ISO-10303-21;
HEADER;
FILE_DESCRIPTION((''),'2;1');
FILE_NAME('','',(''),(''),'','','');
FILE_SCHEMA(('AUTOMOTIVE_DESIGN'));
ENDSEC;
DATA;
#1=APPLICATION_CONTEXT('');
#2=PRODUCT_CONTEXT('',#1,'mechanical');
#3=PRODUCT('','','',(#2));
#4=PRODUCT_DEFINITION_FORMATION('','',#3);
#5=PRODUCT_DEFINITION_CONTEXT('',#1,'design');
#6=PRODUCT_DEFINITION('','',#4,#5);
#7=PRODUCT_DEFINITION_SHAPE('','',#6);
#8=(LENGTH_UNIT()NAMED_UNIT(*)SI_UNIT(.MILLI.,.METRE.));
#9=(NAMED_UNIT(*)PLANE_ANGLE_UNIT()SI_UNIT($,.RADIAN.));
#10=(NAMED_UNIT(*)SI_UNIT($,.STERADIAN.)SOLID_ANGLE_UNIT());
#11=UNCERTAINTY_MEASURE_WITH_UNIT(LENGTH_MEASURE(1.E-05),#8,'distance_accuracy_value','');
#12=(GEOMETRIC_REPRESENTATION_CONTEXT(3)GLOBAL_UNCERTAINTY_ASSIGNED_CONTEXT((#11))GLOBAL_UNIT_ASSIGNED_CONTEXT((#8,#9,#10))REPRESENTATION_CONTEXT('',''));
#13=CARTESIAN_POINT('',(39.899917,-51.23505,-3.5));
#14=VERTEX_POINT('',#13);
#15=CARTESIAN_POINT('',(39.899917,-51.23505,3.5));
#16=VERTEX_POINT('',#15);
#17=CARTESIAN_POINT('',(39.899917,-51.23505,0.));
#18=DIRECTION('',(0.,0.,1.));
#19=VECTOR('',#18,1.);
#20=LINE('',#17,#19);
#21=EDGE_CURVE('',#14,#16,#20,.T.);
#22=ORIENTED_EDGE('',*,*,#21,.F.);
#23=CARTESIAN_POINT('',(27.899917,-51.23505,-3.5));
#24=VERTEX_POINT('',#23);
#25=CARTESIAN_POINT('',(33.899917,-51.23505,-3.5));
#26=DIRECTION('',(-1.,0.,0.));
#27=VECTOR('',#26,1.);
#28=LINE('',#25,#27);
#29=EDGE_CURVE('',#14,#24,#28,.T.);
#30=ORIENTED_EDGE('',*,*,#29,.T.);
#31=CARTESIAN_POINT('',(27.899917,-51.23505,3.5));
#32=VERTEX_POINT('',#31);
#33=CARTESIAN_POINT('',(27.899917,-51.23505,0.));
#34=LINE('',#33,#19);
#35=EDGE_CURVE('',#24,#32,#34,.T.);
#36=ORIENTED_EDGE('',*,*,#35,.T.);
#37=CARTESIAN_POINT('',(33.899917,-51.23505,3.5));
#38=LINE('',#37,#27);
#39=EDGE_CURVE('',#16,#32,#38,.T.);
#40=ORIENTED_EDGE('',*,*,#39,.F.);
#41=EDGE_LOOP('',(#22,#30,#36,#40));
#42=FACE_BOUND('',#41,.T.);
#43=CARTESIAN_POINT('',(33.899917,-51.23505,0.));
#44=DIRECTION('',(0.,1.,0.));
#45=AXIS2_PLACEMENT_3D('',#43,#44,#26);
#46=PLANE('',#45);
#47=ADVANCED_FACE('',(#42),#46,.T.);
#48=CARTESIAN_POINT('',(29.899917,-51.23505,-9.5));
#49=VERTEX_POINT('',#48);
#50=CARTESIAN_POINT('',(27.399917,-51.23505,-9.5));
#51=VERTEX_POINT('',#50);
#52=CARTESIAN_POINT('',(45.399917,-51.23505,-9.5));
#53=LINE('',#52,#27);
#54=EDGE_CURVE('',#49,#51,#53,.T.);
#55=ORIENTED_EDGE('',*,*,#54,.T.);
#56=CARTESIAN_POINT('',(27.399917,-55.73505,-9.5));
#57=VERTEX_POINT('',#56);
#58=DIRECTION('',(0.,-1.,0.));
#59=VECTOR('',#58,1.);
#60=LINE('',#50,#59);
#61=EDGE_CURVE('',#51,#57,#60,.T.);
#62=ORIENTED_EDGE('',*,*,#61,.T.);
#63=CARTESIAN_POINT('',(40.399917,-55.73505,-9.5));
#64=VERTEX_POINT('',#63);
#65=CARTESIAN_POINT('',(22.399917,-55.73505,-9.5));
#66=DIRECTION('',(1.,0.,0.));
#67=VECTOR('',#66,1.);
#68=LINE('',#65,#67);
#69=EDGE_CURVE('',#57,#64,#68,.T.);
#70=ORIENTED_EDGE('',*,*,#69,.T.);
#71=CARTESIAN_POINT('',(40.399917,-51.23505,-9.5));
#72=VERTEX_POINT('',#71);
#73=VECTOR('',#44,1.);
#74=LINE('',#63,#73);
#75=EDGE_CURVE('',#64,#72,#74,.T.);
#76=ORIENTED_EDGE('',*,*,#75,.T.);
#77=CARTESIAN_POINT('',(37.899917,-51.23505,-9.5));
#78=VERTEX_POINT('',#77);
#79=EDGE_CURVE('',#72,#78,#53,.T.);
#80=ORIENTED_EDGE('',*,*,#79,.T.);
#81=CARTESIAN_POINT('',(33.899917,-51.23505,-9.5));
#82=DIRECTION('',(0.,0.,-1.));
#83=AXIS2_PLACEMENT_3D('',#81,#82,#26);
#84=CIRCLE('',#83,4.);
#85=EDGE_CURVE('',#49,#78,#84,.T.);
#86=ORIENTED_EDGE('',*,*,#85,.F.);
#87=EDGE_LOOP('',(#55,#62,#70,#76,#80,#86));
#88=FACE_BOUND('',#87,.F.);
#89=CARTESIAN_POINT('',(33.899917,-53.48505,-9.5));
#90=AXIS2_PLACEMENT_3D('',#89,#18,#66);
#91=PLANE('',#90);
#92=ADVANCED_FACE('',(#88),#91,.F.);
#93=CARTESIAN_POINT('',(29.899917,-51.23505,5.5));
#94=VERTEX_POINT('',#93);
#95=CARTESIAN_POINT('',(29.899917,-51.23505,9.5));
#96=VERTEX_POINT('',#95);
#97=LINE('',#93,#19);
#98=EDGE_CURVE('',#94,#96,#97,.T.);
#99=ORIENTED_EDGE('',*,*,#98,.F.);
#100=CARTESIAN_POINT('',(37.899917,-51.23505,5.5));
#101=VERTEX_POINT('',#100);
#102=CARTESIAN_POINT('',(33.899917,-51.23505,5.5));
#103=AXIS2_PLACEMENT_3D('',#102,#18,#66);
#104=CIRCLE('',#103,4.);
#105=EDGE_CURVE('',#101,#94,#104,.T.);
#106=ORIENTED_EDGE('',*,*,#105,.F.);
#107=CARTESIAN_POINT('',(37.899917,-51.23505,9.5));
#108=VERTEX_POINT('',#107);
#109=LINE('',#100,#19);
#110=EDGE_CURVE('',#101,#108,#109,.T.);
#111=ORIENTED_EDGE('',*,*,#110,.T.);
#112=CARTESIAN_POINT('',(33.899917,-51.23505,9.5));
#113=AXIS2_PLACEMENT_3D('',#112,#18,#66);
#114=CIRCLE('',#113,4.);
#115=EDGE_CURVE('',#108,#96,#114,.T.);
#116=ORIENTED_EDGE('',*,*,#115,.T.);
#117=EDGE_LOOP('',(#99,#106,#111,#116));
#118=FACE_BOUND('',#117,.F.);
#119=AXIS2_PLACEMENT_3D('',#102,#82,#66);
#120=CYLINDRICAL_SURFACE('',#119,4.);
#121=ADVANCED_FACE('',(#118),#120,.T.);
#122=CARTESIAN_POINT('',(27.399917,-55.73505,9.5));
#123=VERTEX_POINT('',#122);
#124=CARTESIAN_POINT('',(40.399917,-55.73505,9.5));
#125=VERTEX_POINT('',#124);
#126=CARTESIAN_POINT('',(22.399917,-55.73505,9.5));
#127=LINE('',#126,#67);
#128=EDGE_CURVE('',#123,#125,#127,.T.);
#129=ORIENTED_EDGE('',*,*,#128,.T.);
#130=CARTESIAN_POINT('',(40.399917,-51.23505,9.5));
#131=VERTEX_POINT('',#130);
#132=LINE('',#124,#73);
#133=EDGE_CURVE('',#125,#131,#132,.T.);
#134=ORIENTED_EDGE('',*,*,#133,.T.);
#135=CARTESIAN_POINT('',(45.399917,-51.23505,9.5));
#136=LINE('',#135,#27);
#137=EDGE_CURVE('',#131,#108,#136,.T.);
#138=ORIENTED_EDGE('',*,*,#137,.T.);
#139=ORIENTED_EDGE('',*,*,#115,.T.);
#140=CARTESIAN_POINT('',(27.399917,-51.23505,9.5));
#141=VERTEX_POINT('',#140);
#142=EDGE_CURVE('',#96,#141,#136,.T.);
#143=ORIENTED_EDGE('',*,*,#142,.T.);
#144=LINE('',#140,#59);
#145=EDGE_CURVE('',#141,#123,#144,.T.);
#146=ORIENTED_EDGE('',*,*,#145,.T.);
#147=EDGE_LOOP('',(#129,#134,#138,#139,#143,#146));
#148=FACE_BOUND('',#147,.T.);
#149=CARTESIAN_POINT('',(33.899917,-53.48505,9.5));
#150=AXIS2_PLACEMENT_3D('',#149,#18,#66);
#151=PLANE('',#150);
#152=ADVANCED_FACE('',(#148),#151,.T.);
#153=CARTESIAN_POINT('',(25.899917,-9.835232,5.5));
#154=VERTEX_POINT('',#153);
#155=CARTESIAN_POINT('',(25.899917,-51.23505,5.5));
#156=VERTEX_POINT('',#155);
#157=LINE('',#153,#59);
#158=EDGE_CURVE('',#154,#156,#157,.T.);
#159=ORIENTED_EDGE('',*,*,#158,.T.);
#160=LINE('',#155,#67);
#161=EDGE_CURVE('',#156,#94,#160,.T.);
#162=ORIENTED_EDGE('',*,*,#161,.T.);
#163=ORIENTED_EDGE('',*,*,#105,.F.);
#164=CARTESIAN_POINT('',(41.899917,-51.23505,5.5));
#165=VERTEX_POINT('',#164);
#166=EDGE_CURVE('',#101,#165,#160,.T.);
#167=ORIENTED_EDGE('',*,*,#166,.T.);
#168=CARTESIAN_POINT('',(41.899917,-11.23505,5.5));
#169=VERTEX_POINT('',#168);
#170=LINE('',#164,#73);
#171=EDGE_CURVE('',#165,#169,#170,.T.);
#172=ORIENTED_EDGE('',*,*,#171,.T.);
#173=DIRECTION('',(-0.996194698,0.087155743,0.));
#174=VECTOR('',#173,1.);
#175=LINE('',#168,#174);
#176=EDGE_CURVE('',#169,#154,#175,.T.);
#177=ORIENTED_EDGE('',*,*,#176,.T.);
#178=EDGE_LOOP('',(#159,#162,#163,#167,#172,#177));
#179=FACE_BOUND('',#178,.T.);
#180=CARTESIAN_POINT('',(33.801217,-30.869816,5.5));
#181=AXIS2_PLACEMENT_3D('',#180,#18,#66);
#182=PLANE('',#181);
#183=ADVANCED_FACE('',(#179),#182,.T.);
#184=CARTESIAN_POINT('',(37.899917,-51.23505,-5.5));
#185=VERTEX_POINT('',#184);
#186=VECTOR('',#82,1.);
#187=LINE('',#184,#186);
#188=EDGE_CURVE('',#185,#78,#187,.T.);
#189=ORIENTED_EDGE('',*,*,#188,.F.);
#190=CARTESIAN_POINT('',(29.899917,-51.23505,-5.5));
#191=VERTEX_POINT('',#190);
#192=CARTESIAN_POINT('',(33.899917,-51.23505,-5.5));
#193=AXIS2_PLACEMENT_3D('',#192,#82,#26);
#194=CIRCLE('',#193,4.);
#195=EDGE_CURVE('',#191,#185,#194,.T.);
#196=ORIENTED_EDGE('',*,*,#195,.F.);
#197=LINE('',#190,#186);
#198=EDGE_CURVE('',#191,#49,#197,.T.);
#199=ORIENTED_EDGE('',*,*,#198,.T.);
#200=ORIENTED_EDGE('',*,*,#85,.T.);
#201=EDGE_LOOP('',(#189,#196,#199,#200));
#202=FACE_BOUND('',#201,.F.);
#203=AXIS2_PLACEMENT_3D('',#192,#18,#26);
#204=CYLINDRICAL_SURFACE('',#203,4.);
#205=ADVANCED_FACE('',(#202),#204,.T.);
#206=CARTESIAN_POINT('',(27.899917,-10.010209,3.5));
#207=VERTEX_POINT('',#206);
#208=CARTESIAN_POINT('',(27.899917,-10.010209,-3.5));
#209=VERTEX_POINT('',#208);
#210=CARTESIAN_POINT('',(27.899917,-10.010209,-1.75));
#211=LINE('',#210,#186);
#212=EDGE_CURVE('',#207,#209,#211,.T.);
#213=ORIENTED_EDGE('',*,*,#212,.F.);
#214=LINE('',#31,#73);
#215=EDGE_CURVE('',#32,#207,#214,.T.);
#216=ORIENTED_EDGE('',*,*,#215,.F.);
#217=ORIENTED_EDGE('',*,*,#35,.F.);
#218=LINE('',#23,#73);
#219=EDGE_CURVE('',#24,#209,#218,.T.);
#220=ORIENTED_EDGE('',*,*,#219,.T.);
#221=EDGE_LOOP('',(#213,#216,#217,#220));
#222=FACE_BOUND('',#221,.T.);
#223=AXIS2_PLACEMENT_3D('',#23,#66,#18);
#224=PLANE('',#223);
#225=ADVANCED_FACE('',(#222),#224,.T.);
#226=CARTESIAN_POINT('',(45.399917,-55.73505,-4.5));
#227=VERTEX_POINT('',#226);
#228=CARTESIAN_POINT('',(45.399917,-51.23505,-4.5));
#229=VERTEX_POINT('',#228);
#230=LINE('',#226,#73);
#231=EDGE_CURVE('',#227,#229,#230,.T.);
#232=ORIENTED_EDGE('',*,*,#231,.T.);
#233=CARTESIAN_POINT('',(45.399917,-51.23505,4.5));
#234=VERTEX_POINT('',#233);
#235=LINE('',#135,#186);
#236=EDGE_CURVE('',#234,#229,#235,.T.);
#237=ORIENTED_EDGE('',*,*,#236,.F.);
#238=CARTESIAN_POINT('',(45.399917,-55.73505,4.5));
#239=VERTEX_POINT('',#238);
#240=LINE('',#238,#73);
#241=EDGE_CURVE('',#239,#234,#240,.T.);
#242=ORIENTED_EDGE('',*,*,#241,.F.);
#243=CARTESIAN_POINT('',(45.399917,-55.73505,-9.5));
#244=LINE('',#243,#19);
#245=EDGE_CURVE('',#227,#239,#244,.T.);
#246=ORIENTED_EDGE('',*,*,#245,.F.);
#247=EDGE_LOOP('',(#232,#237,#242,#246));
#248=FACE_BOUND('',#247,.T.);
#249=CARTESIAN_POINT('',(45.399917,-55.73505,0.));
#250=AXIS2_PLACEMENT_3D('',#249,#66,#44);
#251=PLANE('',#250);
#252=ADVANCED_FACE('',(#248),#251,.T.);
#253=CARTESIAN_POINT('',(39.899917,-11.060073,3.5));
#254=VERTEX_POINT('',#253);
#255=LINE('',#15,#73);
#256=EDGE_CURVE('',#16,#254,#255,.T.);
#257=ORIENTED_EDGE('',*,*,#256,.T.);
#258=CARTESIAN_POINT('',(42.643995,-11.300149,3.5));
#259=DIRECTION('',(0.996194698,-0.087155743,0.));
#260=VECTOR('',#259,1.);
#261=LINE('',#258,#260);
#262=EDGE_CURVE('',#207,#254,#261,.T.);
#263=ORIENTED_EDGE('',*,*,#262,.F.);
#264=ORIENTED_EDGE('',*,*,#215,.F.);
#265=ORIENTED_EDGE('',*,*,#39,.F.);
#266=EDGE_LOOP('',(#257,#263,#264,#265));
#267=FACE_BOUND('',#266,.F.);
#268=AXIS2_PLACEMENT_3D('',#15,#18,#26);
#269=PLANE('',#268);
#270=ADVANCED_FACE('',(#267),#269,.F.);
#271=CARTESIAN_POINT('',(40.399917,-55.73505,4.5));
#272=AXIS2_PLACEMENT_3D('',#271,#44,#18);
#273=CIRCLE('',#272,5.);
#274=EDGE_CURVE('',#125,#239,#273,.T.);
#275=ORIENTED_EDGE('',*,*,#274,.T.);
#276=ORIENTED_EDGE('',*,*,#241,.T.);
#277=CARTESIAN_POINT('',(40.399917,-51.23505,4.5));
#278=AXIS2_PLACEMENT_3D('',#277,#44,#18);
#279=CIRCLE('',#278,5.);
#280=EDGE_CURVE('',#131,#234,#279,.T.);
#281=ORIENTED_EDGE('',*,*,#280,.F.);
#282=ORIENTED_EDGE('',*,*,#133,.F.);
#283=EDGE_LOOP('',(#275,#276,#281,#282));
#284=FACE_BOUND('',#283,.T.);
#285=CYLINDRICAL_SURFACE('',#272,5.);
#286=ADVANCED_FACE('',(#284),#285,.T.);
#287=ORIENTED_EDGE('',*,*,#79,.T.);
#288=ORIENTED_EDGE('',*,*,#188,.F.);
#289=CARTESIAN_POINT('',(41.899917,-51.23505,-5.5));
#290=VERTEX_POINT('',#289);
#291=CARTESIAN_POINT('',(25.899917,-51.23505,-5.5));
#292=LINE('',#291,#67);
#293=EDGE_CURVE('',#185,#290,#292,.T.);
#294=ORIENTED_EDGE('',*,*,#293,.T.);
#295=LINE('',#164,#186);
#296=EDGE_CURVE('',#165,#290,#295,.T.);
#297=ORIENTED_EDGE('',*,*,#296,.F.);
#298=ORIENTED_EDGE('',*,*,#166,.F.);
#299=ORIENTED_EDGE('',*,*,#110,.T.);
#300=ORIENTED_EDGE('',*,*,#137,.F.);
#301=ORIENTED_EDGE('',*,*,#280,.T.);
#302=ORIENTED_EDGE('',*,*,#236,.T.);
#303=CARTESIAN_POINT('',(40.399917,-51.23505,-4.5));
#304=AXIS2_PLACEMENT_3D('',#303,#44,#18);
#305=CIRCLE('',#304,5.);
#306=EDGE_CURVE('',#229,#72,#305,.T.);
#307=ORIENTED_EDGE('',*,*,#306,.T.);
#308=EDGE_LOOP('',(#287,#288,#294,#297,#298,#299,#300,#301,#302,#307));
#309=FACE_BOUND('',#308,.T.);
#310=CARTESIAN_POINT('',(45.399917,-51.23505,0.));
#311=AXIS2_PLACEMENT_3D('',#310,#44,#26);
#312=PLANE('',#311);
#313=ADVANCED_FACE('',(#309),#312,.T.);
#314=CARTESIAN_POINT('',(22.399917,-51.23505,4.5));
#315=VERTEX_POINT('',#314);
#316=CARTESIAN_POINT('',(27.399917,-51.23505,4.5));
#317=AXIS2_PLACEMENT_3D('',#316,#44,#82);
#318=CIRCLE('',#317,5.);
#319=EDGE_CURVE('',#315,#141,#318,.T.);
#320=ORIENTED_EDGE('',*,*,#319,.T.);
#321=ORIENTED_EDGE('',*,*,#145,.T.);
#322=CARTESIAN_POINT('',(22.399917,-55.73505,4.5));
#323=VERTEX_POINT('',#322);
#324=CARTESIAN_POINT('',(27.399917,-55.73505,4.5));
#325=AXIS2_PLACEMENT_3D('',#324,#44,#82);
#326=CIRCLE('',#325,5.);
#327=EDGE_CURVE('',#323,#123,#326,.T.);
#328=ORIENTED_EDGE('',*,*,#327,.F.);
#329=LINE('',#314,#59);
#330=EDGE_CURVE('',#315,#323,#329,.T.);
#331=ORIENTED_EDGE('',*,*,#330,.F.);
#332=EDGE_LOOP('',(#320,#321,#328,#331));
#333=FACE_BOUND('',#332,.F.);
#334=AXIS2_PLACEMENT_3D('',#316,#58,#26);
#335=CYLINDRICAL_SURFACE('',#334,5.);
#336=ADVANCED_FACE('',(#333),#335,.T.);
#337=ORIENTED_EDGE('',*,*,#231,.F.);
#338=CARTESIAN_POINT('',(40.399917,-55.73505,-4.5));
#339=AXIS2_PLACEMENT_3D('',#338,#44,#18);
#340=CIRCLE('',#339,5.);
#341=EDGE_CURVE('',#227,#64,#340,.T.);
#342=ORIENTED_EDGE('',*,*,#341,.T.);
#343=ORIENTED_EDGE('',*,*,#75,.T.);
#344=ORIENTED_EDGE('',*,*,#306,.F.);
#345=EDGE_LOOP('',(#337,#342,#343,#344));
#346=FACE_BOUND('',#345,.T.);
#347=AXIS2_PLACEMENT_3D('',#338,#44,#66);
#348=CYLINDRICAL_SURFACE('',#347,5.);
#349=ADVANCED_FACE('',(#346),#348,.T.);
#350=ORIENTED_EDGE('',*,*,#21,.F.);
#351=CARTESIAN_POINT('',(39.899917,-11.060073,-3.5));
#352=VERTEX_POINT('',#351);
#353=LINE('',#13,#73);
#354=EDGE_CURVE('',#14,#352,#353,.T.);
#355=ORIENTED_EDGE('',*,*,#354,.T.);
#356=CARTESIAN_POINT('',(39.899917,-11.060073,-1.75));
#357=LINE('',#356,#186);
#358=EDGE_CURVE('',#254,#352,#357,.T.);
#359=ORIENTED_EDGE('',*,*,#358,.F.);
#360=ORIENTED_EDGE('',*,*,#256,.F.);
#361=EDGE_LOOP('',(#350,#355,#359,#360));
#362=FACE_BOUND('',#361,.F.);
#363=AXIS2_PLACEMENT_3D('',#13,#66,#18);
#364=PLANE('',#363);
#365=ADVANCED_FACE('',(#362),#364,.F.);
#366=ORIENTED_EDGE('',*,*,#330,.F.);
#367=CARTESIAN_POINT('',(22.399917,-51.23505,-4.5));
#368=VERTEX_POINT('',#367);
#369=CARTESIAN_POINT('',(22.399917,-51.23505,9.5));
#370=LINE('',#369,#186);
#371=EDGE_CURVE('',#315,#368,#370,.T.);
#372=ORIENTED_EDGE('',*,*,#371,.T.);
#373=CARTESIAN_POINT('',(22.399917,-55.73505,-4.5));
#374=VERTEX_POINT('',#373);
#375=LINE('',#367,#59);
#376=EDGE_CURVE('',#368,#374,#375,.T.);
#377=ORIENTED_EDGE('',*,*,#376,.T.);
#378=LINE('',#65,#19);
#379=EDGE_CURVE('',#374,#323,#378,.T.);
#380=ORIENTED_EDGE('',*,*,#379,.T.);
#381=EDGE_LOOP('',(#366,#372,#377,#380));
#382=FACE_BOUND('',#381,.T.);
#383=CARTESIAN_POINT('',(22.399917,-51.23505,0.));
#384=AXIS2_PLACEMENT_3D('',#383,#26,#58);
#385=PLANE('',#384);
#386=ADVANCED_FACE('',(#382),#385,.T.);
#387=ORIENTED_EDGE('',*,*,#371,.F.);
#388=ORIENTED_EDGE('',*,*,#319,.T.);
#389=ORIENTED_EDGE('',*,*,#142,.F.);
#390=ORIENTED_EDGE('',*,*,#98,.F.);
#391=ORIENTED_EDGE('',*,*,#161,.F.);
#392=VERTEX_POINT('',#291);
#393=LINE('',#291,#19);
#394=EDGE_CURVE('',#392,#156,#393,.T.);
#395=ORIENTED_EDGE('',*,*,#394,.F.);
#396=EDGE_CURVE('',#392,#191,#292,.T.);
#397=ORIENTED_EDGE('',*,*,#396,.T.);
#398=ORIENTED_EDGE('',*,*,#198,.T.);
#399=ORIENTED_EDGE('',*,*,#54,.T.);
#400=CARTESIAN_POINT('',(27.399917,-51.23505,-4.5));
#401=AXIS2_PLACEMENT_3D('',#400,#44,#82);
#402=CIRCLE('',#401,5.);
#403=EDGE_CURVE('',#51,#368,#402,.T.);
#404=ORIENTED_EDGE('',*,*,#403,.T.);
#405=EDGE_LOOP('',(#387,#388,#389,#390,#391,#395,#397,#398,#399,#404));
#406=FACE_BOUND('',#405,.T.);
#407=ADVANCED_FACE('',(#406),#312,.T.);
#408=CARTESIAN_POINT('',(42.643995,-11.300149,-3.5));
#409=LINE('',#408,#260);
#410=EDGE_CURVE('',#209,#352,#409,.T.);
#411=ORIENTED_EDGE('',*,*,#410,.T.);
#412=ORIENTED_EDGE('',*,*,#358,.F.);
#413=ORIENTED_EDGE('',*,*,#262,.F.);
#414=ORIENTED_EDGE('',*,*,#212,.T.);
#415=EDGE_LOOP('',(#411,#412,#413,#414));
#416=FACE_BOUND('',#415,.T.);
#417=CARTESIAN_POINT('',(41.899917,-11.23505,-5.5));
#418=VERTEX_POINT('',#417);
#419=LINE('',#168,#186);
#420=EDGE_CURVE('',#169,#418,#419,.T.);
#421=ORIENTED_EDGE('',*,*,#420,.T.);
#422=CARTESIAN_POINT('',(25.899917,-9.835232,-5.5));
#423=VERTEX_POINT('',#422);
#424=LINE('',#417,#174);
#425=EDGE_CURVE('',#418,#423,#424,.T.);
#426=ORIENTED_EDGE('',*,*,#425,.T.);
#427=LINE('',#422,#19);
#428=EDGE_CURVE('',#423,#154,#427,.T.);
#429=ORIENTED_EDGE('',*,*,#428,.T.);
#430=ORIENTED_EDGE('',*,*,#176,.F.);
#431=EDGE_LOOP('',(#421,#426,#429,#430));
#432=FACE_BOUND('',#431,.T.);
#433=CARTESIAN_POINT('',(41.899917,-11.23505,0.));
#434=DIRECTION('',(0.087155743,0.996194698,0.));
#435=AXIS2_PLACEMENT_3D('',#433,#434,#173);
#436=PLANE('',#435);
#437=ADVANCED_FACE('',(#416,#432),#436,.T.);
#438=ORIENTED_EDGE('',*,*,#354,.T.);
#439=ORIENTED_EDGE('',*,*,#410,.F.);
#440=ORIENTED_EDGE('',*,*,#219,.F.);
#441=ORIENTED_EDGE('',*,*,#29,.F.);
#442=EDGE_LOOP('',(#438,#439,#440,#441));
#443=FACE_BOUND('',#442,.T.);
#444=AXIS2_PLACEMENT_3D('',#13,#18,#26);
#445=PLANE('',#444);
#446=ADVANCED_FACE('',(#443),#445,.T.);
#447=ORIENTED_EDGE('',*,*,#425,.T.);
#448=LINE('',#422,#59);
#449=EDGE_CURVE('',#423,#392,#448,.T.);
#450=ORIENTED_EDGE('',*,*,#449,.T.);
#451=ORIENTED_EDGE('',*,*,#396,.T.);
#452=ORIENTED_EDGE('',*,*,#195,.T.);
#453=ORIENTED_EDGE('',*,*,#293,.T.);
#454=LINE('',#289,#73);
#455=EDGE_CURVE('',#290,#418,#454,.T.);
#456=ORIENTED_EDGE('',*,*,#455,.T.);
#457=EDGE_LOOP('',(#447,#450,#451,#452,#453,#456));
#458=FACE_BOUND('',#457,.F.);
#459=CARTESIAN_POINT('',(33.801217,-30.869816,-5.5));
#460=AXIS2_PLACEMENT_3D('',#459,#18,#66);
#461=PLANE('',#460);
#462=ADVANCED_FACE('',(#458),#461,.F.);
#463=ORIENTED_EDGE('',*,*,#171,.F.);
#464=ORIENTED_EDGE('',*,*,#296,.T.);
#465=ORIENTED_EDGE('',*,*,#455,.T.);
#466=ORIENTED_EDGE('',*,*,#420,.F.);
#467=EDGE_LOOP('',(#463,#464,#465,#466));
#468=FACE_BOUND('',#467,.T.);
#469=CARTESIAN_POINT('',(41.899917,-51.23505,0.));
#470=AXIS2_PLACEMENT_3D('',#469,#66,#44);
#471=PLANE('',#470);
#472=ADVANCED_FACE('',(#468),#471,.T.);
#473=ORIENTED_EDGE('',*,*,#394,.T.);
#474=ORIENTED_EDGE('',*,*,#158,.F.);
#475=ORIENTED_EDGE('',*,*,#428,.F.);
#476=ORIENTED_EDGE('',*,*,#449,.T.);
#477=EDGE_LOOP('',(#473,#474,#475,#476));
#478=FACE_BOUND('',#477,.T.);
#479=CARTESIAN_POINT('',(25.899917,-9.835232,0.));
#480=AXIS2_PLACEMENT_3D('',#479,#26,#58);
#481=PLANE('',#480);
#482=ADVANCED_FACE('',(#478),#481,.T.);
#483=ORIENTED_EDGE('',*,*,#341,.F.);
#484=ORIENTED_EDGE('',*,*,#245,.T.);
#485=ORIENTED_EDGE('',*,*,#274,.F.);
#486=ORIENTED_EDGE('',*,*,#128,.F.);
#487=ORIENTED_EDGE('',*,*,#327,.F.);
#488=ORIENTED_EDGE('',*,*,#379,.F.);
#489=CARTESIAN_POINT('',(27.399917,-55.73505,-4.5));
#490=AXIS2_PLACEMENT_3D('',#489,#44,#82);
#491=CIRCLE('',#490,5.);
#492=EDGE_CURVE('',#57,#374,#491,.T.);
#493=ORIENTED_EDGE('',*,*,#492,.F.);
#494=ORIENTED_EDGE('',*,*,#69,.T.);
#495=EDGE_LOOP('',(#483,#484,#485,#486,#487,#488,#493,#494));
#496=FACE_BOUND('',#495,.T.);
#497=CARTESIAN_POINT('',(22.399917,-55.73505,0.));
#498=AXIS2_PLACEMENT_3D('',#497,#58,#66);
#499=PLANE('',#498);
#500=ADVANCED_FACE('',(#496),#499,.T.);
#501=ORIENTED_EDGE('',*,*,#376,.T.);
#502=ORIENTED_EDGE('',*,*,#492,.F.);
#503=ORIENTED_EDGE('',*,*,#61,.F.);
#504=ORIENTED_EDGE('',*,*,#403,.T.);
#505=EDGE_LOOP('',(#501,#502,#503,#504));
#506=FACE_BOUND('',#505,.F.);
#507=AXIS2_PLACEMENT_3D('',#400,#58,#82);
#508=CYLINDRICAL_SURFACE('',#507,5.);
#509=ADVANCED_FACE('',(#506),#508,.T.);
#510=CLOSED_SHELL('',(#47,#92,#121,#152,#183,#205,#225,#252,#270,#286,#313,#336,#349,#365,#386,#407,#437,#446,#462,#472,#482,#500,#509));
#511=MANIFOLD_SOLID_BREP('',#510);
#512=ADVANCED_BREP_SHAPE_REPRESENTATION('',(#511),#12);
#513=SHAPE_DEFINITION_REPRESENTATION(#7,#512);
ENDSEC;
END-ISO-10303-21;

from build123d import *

# Parameters (mm, degrees)
F1_DEPTH = 5.5
F2_DEPTH = 9.5
F3_W     = 12
F3_H     = 7
F4_DEPTH = 44.1
F6_DEPTH = 4
F8_DEPTH = 4
F9_R     = 5
F10_R    = 5
F11_R    = 5
F12_R    = 5


# Not quite as in the source:
# - a feature names something its author has since deleted; it is built from what else it names


with BuildPart() as f1:
    # F0 (on Top) → F1 (new body, symmetric)
    with BuildSketch(Plane.XY):
        Polygon((41.8999169252, -11.2350502836), (25.8999169252, -9.8352316672), (25.8999169252, -51.2350502836), (41.8999169252, -51.2350502836), align=None)
    extrude(amount=F1_DEPTH, both=True)

    # F0 (on Top) → F2 (join, symmetric)
    with BuildSketch(Plane.XY):
        Polygon((41.8999169252, -51.2350502836), (25.8999169252, -51.2350502836), (22.3999169252, -51.2350502836), (22.3999169252, -55.7350502836), (45.3999169252, -55.7350502836), (45.3999169252, -51.2350502836), align=None)
    extrude(amount=F2_DEPTH, both=True)

    # F3 (on face) → F4 (cut)
    with BuildSketch(Plane(origin=(0, -51.2350502836, 0), x_dir=(-1, 0, 0), z_dir=(0, 1, 0))):
        with Locations((-33.8999169252, 0)):
            Rectangle(F3_W, F3_H)
    extrude(amount=F4_DEPTH, mode=Mode.SUBTRACT)

    # F5 (on face) → F6 (join)
    with BuildSketch(Plane.XY.offset(5.5)):
        with BuildLine():
            Line((29.8999169252, -51.2350502836), (37.8999169252, -51.2350502836))
            ThreePointArc((37.8999169252, -51.2350502836), (33.8999169252, -47.2350502836), (29.8999169252, -51.2350502836))
        make_face()
    extrude(amount=F6_DEPTH)

    # F7 (on face) → F8 (join)
    with BuildSketch(Plane(origin=(0, 0, -5.5), x_dir=(1, 0, 0), z_dir=(0, 0, -1))):
        with BuildLine():
            ThreePointArc((29.8999169252, 51.2350502836), (33.8999169252, 47.2350502836), (37.8999169252, 51.2350502836))
            Line((37.8999169252, 51.2350502836), (29.8999169252, 51.2350502836))
        make_face()
    extrude(amount=F8_DEPTH)

    # F9
    f9_edges = [f1.edges().sort_by_distance(p)[0] for p in [
        (22.399917, -53.48505, 9.5),
    ]]
    fillet(f9_edges, radius=F9_R)

    # F10
    f10_edges = [f1.edges().sort_by_distance(p)[0] for p in [
        (45.399917, -53.48505, 9.5),
    ]]
    fillet(f10_edges, radius=F10_R)

    # F11
    f11_edges = [f1.edges().sort_by_distance(p)[0] for p in [
        (45.399917, -53.48505, -9.5),
    ]]
    fillet(f11_edges, radius=F11_R)

    # F12
    f12_edges = [f1.edges().sort_by_distance(p)[0] for p in [
        (22.399917, -53.48505, -9.5),
    ]]
    fillet(f12_edges, radius=F12_R)


solid = f1.part
